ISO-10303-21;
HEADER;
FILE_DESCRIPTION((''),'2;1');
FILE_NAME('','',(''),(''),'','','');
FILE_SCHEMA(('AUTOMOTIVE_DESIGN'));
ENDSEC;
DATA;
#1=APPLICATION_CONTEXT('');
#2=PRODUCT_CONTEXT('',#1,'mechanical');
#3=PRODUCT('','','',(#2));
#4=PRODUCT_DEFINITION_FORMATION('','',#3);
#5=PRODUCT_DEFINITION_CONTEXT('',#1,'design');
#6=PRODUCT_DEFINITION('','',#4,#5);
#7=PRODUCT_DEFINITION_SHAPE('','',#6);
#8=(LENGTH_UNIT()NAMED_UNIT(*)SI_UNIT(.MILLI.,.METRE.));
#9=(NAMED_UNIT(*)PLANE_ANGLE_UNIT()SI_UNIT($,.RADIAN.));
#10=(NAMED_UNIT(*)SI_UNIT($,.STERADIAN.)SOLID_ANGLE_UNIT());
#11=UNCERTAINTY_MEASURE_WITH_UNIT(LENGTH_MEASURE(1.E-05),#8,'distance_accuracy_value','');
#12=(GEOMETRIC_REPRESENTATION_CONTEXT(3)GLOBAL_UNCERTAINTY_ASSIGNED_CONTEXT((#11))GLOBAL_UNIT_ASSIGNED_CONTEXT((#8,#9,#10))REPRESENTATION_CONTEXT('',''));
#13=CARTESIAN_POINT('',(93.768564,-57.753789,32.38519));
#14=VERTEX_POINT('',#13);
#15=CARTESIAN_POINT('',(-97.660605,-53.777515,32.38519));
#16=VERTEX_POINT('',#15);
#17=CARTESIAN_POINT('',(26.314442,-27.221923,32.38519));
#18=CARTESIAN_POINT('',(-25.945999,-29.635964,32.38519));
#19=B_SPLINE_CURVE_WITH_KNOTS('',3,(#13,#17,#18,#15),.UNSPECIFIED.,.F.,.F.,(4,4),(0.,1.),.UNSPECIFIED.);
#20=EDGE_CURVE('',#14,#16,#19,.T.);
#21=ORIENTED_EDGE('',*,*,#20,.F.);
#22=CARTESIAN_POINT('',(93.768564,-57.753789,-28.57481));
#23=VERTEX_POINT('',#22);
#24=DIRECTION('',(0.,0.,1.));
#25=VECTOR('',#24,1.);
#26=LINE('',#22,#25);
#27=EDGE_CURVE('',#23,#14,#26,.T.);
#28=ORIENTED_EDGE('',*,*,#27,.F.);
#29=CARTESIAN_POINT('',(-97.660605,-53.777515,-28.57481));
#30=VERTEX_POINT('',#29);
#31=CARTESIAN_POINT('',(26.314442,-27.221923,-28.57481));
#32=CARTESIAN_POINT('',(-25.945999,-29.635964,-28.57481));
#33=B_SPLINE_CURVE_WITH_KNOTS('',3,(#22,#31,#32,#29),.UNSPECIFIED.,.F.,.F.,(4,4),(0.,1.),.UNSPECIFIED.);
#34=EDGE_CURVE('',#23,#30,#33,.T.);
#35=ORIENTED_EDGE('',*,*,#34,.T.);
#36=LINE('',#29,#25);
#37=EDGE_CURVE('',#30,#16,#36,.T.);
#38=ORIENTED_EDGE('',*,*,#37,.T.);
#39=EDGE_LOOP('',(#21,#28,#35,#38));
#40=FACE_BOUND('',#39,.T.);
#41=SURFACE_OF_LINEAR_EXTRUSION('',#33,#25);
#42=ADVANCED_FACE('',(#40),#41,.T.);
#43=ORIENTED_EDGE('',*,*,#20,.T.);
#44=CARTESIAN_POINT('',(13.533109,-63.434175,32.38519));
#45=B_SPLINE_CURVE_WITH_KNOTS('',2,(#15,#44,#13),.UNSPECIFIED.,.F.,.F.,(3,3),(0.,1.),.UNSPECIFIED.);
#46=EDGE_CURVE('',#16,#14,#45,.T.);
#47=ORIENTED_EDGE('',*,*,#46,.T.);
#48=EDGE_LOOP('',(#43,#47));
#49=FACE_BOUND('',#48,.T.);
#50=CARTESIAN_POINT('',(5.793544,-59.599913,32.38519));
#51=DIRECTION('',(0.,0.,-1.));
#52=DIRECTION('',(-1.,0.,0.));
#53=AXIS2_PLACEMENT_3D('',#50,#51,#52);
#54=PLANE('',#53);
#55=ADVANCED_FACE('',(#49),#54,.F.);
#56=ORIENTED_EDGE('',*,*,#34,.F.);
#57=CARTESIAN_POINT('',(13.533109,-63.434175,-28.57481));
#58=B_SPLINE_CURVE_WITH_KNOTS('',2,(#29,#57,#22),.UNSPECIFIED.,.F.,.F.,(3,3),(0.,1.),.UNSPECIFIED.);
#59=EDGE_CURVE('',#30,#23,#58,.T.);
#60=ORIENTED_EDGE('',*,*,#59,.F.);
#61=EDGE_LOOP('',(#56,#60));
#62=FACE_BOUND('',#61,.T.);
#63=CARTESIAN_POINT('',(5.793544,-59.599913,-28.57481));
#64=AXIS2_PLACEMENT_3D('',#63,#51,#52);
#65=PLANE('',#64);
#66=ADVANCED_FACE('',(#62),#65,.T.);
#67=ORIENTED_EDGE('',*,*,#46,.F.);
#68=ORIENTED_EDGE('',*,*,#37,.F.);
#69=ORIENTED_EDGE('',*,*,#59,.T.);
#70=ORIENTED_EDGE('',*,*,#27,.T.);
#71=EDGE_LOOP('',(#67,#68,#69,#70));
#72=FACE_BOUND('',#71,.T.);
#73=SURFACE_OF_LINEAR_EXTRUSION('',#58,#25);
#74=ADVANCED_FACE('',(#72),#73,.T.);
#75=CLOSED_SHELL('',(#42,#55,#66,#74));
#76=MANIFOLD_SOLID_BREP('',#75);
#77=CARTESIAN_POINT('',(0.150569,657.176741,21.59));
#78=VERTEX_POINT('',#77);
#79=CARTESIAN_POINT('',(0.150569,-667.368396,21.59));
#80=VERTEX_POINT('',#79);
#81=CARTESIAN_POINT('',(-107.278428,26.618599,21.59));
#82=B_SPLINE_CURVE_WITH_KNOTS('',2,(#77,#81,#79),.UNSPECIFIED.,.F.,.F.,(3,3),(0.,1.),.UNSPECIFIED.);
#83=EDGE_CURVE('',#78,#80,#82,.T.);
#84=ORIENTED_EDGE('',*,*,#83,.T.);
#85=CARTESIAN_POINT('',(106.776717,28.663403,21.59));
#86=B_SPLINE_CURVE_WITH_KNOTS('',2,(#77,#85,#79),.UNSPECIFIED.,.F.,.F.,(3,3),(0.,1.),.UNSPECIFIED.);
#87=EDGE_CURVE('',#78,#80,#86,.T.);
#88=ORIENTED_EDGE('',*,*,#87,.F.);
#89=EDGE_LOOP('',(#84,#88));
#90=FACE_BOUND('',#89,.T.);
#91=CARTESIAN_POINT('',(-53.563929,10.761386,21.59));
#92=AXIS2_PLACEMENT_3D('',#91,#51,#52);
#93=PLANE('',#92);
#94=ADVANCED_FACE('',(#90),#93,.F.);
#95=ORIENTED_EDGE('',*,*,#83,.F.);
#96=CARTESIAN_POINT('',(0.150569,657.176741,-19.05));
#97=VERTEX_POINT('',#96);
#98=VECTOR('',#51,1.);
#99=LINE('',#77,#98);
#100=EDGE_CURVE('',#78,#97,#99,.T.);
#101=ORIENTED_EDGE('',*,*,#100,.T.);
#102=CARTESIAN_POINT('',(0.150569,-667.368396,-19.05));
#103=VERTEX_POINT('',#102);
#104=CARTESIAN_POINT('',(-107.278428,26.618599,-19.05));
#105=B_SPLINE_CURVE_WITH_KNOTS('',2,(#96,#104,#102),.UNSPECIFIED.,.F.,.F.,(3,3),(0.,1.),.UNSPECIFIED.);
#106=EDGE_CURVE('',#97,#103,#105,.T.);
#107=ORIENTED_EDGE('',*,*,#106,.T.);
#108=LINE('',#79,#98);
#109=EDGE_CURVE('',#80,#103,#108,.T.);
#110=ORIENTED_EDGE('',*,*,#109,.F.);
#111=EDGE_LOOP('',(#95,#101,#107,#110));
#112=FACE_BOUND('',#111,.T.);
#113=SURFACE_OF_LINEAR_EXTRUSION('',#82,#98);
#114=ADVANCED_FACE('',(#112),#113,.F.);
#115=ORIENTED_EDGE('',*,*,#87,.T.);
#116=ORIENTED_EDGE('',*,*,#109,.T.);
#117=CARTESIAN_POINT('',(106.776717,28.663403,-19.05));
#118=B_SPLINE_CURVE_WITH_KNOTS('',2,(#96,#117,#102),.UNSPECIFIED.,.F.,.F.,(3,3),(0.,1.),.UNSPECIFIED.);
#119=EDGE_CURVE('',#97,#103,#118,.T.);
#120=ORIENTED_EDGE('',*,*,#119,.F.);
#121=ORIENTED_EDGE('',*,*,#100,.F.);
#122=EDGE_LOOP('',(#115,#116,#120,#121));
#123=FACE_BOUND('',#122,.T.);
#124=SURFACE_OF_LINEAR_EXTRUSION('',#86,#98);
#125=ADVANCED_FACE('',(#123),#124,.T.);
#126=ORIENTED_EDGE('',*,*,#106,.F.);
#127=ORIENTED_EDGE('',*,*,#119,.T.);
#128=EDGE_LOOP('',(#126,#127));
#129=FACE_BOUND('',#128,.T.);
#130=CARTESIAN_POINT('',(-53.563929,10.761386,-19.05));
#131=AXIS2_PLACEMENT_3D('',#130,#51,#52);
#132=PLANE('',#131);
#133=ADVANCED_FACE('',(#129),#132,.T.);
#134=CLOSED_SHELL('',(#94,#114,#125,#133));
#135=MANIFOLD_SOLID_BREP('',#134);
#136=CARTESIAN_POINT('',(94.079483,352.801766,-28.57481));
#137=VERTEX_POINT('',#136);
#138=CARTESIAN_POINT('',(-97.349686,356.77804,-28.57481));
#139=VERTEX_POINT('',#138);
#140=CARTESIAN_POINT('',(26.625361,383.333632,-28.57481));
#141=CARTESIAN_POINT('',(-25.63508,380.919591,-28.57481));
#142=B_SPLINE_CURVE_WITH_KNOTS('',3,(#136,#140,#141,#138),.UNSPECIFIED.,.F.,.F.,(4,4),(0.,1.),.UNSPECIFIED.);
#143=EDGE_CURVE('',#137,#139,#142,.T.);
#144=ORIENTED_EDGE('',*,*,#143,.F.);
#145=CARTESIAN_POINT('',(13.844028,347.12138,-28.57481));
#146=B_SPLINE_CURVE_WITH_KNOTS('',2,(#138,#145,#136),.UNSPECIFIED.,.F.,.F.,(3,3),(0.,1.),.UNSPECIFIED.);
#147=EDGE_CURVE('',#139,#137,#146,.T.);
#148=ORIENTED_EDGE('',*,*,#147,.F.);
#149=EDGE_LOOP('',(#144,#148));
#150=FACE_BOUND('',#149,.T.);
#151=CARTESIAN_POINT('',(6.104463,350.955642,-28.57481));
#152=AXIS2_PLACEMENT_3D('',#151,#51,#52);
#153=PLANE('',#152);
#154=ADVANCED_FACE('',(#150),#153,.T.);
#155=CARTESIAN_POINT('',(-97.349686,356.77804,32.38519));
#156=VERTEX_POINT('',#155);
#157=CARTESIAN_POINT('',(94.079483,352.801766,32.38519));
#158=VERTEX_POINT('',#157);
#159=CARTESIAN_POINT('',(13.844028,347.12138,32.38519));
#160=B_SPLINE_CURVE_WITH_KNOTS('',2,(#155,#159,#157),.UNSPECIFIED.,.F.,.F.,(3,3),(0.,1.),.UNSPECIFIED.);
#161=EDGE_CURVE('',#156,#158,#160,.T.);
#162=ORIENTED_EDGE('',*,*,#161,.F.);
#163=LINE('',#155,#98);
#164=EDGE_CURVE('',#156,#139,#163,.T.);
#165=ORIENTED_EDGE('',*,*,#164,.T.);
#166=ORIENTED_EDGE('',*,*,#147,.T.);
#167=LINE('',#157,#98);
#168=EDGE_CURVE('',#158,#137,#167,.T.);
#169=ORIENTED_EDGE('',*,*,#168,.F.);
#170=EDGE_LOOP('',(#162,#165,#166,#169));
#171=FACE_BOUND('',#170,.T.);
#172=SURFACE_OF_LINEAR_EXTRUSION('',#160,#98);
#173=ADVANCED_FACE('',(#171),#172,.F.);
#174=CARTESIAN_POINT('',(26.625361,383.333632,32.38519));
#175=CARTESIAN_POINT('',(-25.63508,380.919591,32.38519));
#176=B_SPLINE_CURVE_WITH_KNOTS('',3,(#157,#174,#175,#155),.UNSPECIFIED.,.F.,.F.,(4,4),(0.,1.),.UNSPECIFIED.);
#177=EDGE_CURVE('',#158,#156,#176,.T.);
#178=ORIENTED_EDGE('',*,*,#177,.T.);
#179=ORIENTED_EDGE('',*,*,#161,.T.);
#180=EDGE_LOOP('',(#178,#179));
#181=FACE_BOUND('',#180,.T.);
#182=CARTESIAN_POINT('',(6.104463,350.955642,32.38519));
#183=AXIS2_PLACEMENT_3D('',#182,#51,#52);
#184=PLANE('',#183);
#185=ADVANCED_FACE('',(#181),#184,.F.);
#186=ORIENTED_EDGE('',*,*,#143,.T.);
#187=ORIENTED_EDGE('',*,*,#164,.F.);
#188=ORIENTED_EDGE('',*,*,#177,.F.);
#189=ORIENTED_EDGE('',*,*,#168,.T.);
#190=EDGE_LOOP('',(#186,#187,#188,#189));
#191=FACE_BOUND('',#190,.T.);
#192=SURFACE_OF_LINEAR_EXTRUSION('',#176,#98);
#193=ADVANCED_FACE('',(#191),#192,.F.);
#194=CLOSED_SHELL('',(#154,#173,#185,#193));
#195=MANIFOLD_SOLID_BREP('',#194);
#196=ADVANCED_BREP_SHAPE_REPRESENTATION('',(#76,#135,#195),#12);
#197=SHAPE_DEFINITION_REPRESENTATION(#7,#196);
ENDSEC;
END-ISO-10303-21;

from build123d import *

# Parameters (mm, degrees)
BOSS_EXTRUDE1_DEPTH      = 2.54
BOSS_EXTRUDE2_DEPTH      = 3.81
BOSS_EXTRUDE4_DEPTH      = 1.27
BOSS_EXTRUDE4_DEPTH_BACK = 2.54
SCALE3_START             = -28.574810428
SCALE3_DEPTH             = 60.96
SCALE3_START_2           = -28.574810435
SCALE3_2_DEPTH           = 60.96
SCALE3_START_3           = -19.05
SCALE3_3_DEPTH           = 40.64


# Read off the part's stored shape, not the designer's step: Scale3
with BuildPart() as part:
    # Sketch1 → Boss-Extrude1 (new body)
    with BuildSketch(Plane.XY):
        with BuildLine():
            add(Edge.make_bspline(
                [(0, 42.428687582), (6.664134239, 3.146603919), (0, -40.355383477)],
                knots=[0, 0, 0, 1, 1, 1], degree=2))
            add(Edge.make_bspline(
                [(0, 42.428687582), (-6.714312311, 3.018803659), (0, -40.355383477)],
                knots=[0, 0, 0, 1, 1, 1], degree=2))
        make_face()
    extrude(amount=BOSS_EXTRUDE1_DEPTH)

    # Scale3 3 outline → Scale3 3 (add)
    with BuildSketch(Plane.XY.offset(SCALE3_START_3)):
        with BuildLine():
            add(Edge.make_bspline(
                [(0.150569385, 657.1767414), (106.776717215, 28.663402798), (0.150569385, -667.368395536)],
                knots=[0, 0, 0, 1, 1, 1], degree=2))
            add(Edge.make_bspline(
                [(0.150569385, 657.1767414), (-107.278427592, 26.618598636), (0.150569385, -667.368395536)],
                knots=[0, 0, 0, 1, 1, 1], degree=2))
        make_face()
    extrude(amount=SCALE3_3_DEPTH)


with BuildPart() as body_2:
    # Sketch2 → Boss-Extrude2 (new body)
    with BuildSketch(Plane(origin=(0, 1.555120755, 0), x_dir=(1, 0, 0), z_dir=(0, 0, 1))):
        with BuildLine():
            add(Edge.make_bspline(
                [(-5.69255125, 359.571616655), (-1.210388352, 361.080463571), (2.055889185, 361.231341172), (6.27177182, 359.323099559)],
                knots=[0, 0, 0, 0, 1, 1, 1, 1], degree=3))
            add(Edge.make_bspline(
                [(-5.69255125, 359.571616655), (1.257055878, 358.968075421), (6.27177182, 359.323099559)],
                knots=[0, 0, 0, 1, 1, 1], degree=2))
        make_face()
    extrude(amount=BOSS_EXTRUDE2_DEPTH)

    # Scale3 outline → Scale3 (add)
    with BuildSketch(Plane.XY.offset(SCALE3_START)):
        with BuildLine():
            add(Edge.make_bspline(
                [(94.079482737, 352.801766385), (26.625360582, 383.333632203), (-25.63508001, 380.919590587), (-97.34968638, 356.778039928)],
                knots=[0, 0, 0, 0, 1, 1, 1, 1], degree=3))
            add(Edge.make_bspline(
                [(-97.34968638, 356.778039928), (13.844027658, 347.121380185), (94.079482737, 352.801766385)],
                knots=[0, 0, 0, 1, 1, 1], degree=2))
        make_face()
    extrude(amount=SCALE3_DEPTH)


with BuildPart() as body_3:
    # Sketch4 → Boss-Extrude4 (new, two sides: drawn at the far end of the back side and taken through both)
    with BuildSketch(Plane(origin=(0.757083365, -8.201038142, 2.54), x_dir=(1, 0, 0), z_dir=(0, 0, 1)).offset(-BOSS_EXTRUDE4_DEPTH_BACK)):
        with BuildLine():
            add(Edge.make_bspline(
                [(-6.762619041, -41.227251572), (-2.280456143, -39.718404656), (0.985821394, -39.567527055), (5.201704029, -41.475768668)],
                knots=[0, 0, 0, 0, 1, 1, 1, 1], degree=3))
            add(Edge.make_bspline(
                [(-6.762619041, -41.227251572), (0.186988086, -41.830792806), (5.201704029, -41.475768668)],
                knots=[0, 0, 0, 1, 1, 1], degree=2))
        make_face()
    extrude(amount=BOSS_EXTRUDE4_DEPTH + BOSS_EXTRUDE4_DEPTH_BACK)

    # Scale3 2 outline → Scale3 2 (add)
    with BuildSketch(Plane.XY.offset(SCALE3_START_2)):
        with BuildLine():
            add(Edge.make_bspline(
                [(93.768563702, -57.753788671), (26.314441548, -27.221922853), (-25.945999045, -29.635964469), (-97.660605414, -53.777515128)],
                knots=[0, 0, 0, 0, 1, 1, 1, 1], degree=3))
            add(Edge.make_bspline(
                [(-97.660605414, -53.777515128), (13.533108624, -63.434174871), (93.768563702, -57.753788671)],
                knots=[0, 0, 0, 1, 1, 1], degree=2))
        make_face()
    extrude(amount=SCALE3_2_DEPTH)


solid = Compound([part.part, body_2.part, body_3.part])
